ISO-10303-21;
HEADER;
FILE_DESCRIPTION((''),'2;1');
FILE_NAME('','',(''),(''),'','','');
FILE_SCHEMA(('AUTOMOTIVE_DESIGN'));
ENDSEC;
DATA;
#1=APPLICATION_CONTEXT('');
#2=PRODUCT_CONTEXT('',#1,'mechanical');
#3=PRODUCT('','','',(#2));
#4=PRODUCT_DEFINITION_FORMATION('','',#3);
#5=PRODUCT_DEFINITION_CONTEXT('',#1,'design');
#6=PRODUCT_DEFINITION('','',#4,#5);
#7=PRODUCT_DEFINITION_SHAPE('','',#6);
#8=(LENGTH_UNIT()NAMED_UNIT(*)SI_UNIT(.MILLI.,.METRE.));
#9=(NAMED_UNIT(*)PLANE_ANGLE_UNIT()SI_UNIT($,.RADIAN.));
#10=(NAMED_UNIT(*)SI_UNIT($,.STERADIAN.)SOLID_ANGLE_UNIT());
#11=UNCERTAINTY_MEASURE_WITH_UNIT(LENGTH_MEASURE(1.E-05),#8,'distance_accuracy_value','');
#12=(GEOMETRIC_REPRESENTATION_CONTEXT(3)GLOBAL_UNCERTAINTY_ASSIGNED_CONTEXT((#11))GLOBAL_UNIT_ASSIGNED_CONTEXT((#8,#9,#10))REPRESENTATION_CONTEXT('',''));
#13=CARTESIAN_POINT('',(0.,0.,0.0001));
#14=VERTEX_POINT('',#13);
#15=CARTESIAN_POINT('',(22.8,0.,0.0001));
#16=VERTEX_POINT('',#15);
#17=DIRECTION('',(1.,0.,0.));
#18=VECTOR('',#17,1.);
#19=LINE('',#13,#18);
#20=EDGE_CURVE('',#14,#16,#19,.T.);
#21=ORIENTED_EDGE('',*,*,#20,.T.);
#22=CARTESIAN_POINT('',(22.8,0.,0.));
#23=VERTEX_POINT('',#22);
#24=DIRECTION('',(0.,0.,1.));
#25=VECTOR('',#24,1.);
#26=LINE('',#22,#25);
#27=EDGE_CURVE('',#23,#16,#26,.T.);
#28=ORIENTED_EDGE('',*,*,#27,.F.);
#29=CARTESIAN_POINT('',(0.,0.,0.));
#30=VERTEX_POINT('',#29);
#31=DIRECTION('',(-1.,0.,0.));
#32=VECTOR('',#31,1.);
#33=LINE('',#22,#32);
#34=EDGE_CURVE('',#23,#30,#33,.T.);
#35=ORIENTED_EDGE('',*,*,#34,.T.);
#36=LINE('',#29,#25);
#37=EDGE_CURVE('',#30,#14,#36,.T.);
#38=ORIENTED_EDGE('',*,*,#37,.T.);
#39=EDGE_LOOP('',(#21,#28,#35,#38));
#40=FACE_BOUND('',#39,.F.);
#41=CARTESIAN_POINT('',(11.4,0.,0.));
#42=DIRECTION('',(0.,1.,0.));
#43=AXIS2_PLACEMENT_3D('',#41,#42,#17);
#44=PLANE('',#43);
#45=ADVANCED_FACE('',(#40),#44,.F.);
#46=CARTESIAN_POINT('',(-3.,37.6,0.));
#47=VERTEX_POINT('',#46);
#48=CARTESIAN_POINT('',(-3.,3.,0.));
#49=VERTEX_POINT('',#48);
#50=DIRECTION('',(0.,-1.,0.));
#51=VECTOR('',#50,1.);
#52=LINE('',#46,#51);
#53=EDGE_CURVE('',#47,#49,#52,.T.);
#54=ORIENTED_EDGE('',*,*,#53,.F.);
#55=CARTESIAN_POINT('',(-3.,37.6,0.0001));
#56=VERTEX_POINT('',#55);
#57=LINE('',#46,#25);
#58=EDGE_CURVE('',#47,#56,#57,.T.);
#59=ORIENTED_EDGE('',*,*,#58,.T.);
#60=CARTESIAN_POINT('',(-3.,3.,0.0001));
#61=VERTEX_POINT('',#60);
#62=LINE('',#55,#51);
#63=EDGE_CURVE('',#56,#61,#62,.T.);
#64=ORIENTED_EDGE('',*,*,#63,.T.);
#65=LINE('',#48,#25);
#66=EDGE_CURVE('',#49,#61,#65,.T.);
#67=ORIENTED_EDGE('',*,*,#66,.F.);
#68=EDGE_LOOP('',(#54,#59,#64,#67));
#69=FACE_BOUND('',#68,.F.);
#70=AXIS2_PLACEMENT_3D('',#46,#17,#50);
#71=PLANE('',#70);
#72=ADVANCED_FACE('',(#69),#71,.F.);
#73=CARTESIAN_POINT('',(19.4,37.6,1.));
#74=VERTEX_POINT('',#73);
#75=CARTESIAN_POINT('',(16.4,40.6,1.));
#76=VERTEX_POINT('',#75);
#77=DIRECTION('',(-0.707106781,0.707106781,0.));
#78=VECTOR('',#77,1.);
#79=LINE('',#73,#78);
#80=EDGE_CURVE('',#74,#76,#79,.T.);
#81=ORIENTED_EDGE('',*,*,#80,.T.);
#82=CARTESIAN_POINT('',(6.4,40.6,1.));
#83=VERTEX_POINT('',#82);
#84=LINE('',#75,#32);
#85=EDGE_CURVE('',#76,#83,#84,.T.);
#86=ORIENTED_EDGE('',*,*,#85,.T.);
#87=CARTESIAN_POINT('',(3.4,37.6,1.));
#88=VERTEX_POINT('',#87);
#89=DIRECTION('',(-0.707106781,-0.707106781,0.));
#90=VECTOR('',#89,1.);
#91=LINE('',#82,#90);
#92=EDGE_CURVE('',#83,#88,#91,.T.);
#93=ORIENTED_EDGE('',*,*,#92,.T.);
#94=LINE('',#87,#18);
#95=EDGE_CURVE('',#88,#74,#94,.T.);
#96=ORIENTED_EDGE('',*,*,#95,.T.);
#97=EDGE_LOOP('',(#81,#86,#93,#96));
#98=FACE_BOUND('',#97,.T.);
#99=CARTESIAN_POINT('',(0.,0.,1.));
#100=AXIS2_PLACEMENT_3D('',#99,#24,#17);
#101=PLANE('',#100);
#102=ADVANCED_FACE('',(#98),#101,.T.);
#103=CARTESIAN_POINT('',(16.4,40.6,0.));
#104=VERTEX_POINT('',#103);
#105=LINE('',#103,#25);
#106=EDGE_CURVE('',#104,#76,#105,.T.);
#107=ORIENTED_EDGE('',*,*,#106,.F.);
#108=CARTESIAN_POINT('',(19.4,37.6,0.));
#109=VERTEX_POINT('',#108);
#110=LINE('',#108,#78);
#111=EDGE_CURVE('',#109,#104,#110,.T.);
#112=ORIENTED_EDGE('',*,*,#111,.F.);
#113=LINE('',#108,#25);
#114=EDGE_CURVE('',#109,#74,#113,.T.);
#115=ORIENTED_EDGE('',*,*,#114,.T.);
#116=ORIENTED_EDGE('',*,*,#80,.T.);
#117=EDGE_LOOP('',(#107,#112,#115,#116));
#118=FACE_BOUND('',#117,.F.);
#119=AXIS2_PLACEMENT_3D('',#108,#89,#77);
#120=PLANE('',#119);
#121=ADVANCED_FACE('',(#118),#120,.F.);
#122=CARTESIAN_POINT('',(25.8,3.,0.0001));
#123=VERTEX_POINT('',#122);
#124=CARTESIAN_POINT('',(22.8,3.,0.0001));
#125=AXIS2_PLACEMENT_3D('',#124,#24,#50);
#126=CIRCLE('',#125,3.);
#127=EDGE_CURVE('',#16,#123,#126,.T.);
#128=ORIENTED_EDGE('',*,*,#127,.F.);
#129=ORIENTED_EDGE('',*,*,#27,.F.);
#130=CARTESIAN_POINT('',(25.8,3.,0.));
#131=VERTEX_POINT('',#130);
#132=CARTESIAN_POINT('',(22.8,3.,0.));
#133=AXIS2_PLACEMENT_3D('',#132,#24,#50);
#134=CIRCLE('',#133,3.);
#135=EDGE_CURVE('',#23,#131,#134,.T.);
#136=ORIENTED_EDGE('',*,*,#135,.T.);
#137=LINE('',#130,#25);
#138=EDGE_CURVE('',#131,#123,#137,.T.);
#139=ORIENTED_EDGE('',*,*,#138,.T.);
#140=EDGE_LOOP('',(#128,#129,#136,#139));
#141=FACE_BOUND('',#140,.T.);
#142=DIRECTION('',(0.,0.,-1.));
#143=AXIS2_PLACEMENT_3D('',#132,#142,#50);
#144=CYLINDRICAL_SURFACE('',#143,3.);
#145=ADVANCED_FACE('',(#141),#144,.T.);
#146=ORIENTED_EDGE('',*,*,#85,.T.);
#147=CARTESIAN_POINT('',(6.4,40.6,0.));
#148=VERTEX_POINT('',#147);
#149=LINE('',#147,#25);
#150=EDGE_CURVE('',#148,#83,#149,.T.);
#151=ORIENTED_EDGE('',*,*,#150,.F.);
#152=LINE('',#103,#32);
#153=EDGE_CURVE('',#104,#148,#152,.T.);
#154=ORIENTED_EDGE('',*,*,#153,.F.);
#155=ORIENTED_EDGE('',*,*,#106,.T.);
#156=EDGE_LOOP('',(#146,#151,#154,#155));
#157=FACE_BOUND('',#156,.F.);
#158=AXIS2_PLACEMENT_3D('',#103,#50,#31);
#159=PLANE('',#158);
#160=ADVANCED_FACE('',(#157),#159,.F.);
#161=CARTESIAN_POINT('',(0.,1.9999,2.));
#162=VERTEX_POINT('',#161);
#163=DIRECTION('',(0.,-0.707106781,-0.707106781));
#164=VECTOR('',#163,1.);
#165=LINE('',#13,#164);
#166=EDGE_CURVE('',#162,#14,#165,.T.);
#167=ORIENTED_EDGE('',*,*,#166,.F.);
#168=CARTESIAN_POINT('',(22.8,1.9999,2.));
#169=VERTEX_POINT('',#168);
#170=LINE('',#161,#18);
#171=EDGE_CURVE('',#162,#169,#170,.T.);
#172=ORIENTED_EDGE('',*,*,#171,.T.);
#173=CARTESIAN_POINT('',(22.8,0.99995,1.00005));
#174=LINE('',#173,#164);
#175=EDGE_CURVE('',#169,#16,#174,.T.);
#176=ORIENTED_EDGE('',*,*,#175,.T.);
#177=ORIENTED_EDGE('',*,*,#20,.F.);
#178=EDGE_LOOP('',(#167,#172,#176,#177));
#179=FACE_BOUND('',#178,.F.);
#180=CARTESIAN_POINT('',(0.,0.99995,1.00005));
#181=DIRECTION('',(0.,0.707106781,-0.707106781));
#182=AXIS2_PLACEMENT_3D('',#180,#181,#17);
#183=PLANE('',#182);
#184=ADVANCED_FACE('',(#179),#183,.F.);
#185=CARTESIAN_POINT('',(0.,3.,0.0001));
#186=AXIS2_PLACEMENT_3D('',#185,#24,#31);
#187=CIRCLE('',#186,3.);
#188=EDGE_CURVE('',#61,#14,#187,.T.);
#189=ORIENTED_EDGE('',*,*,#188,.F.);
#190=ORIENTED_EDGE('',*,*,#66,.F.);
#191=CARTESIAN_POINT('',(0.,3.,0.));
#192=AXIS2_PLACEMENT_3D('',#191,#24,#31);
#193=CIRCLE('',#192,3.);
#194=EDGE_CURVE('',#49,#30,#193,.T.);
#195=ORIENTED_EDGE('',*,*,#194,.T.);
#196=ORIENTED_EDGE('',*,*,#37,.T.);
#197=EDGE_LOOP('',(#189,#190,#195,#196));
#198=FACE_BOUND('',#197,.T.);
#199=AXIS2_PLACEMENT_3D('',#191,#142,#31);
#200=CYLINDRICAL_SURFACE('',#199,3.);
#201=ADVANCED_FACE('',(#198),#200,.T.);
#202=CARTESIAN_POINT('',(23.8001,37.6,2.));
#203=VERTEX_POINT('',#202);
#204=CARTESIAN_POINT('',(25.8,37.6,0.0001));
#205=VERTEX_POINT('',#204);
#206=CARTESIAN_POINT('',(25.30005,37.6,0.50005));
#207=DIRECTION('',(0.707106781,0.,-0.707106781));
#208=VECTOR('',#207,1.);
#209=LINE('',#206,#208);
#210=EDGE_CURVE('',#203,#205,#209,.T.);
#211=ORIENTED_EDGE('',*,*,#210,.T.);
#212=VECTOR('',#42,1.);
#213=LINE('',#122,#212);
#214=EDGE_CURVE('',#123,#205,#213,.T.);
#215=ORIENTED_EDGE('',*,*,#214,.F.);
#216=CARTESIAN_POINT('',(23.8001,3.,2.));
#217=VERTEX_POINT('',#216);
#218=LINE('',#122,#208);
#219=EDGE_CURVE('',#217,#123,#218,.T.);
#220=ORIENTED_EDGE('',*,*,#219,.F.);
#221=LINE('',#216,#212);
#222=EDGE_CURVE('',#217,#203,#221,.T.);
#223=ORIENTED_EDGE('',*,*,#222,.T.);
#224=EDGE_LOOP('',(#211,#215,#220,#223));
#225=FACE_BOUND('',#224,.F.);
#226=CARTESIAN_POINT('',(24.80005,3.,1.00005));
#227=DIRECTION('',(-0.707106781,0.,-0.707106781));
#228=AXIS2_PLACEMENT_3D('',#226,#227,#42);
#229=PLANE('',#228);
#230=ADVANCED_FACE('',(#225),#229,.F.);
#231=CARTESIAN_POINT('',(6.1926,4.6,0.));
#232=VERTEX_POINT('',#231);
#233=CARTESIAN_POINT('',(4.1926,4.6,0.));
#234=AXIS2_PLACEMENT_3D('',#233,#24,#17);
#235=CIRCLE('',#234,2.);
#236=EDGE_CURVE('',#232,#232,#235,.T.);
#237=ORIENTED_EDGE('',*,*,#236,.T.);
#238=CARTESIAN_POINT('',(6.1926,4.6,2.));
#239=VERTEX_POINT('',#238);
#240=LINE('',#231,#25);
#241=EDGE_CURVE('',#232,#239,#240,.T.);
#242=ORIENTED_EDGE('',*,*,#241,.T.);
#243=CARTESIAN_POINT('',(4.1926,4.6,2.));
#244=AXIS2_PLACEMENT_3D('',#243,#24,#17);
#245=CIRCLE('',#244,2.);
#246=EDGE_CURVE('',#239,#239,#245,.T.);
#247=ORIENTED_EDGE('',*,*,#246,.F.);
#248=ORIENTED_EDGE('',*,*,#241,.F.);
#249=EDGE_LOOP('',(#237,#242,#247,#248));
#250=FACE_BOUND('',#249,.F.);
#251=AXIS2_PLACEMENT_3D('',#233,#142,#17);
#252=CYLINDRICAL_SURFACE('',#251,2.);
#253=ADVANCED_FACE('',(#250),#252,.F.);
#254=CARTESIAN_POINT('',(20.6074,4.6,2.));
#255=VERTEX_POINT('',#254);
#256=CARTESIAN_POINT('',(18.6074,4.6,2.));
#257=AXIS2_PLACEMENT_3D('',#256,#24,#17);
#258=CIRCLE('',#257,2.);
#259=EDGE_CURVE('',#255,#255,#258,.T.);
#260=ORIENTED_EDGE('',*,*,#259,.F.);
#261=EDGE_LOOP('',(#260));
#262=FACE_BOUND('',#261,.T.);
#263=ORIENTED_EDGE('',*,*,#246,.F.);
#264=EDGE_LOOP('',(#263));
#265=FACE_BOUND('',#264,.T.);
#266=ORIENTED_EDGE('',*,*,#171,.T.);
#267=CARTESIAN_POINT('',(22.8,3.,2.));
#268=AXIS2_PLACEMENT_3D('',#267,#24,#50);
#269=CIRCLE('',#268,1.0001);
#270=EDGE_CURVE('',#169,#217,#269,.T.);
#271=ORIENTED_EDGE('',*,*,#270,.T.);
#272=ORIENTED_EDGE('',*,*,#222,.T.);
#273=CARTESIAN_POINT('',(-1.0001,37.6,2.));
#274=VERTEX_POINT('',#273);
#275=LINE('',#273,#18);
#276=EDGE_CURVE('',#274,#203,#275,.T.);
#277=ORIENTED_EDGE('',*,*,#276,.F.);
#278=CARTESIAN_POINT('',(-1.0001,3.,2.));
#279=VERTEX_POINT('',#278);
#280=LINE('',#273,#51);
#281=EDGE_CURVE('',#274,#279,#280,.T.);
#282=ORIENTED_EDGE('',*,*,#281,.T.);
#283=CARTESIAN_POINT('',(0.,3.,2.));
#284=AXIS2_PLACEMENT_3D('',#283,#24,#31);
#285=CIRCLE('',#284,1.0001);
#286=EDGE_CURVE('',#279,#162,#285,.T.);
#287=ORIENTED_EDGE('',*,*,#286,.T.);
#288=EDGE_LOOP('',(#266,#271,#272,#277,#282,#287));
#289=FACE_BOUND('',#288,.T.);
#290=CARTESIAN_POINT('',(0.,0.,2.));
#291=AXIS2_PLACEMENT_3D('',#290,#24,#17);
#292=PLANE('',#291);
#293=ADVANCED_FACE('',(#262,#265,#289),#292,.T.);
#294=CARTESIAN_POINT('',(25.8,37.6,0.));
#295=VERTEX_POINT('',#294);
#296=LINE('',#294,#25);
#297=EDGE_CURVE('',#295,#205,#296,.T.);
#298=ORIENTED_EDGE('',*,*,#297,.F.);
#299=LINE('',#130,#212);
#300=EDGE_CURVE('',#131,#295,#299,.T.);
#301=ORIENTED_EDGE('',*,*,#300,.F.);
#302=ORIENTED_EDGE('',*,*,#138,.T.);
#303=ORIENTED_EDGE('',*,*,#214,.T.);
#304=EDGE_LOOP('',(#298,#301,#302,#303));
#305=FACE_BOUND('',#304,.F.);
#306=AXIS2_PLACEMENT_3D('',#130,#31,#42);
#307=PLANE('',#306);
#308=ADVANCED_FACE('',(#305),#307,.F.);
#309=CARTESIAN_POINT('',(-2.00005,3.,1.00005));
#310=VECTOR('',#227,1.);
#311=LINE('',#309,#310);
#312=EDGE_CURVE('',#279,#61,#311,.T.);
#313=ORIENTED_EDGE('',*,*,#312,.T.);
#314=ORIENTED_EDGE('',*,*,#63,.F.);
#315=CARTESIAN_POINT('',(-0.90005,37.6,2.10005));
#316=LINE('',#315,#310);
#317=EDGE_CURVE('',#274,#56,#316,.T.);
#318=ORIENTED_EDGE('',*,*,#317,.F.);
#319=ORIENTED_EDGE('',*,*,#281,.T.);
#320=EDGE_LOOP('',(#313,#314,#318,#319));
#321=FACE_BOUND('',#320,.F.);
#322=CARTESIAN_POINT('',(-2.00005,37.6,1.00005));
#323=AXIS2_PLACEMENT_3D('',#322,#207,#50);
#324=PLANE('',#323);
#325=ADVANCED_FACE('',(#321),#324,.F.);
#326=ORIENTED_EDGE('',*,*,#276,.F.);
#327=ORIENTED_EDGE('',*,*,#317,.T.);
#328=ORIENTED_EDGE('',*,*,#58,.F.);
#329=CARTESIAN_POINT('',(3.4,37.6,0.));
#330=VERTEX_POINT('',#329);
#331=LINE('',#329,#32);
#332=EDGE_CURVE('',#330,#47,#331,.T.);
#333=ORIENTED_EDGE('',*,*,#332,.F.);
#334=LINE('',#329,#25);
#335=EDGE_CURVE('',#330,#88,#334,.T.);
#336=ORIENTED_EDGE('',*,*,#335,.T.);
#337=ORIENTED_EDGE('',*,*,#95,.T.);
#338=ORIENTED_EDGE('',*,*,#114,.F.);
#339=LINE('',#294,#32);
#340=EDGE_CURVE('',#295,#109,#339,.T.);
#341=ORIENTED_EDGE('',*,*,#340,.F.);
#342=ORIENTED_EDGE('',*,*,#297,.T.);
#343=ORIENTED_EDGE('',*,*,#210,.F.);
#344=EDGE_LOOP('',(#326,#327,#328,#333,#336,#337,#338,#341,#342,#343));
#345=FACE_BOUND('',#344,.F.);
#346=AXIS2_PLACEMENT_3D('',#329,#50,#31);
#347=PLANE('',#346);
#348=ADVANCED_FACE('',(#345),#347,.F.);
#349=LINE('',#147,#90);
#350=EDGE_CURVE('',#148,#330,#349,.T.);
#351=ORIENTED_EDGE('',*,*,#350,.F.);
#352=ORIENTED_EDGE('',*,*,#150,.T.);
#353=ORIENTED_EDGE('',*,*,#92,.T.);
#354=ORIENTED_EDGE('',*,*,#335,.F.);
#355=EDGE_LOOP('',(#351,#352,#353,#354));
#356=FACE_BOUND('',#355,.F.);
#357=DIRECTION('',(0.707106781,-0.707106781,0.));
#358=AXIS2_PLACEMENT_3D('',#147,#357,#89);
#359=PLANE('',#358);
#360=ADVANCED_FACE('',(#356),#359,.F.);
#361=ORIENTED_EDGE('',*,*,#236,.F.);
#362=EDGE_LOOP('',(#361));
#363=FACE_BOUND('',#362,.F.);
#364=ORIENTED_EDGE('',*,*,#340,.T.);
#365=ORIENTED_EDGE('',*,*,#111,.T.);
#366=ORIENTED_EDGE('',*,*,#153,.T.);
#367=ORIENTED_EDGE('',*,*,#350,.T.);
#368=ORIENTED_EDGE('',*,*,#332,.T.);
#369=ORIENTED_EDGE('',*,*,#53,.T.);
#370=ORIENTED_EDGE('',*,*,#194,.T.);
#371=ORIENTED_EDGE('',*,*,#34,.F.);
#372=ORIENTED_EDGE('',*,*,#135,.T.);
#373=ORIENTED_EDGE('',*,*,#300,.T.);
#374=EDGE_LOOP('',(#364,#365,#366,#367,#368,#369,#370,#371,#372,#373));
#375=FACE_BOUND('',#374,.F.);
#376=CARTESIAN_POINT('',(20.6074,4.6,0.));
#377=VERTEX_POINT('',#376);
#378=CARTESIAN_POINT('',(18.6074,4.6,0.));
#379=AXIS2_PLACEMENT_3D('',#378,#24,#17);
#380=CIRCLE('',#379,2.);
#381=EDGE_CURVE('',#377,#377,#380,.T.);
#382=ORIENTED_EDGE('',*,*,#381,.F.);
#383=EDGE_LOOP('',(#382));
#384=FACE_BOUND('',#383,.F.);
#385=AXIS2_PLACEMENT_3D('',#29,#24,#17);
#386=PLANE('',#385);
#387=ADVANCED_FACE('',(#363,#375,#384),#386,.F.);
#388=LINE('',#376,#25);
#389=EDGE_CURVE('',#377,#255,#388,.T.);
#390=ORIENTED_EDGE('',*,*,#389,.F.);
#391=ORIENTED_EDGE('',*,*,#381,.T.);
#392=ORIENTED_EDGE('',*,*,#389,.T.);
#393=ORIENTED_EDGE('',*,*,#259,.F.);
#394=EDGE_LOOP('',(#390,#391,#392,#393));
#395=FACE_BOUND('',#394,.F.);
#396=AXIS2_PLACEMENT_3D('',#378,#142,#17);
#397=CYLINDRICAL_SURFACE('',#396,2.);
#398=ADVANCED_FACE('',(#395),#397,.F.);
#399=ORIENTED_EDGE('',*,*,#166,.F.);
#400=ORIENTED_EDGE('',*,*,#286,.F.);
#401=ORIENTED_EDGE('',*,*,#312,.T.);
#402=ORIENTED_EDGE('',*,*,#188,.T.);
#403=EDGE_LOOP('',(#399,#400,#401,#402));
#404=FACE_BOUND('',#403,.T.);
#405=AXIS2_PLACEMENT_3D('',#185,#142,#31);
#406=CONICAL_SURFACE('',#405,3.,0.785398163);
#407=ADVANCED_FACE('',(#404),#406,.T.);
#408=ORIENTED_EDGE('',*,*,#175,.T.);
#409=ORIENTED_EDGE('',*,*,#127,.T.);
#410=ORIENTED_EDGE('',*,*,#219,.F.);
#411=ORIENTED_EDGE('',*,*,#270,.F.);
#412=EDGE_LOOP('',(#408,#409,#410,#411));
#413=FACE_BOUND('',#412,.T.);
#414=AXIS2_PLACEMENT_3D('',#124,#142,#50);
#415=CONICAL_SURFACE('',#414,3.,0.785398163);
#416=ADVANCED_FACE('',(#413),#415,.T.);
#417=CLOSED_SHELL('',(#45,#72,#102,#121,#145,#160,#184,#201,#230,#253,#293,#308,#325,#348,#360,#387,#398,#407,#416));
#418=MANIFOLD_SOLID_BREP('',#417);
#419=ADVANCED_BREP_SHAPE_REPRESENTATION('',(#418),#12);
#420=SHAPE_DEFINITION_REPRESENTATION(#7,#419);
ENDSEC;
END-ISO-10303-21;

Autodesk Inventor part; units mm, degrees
ref_plane "YZ Plane" through (0, 0, 0) normal (1, 0, 0) x (0, 1, 0)
ref_plane "XZ Plane" through (0, 0, 0) normal (0, 1, 0) x (-1, 0, 0)
ref_plane "XY Plane" through (0, 0, 0) normal (0, 0, 1) x (1, 0, 0)
sketch "Skizze1" plane through (0, 0, 0) normal (0, 0, 1) x (1, 0, 0)
  line L0 (3.4, 37.6) -> (-3, 37.6)
  line L1 (-3, 37.6) -> (-3, 3)
  arc A0 (-3, 3) -> (0, 0) centre (0, 3) ccw
  line L2 (0, 0) -> (22.8, 0)
  arc A1 (22.8, 0) -> (25.8, 3) centre (22.8, 3) ccw
  line L3 (25.8, 3) -> (25.8, 37.6)
  line L4 (25.8, 37.6) -> (19.4, 37.6)
  line L5 (19.4, 37.6) -> (16.4, 40.6)
  line L6 (16.4, 40.6) -> (6.4, 40.6)
  line L7 (6.4, 40.6) -> (3.4, 37.6)
  line L8 (-1.8, 35.6) -> (24.6, 35.6)
  line L9 (24.6, 35.6) -> (24.6, 9.2)
  line L10 (24.6, 9.2) -> (-1.8, 9.2)
  line L11 (-1.8, 9.2) -> (-1.8, 35.6)
  line L12 (24.6, 35.6) -> (-1.8, 35.6)
  line L13 (-1.8, 35.6) -> (-1.8, 9.2)
  line L14 (-1.8, 9.2) -> (24.6, 9.2)
  line L15 (24.6, 9.2) -> (24.6, 35.6)
  line L16 (24.6, 35.6) -> (-1.8, 35.6)
  line L17 (-3, 37.6) -> (3.4, 37.6)
  line L18 (-3, 3) -> (-3, 37.6)
  arc A2 (-3, 3) -> (0, 0) centre (0, 3) ccw
  line L19 (22.8, 0) -> (0, 0)
  arc A3 (22.8, 0) -> (25.8, 3) centre (22.8, 3) ccw
  line L20 (25.8, 37.6) -> (25.8, 3)
  line L21 (19.4, 37.6) -> (25.8, 37.6)
  line L22 (19.4, 37.6) -> (16.4, 40.6)
  line L23 (16.4, 40.6) -> (6.4, 40.6)
  line L24 (6.4, 40.6) -> (3.4, 37.6)
  circle A4 centre (4.1926, 4.6) radius 2
  line L25 (11.4, 35.6) -> (11.4, 0)
  circle A5 centre (18.6074, 4.6) radius 2
  point P0 (-3, 37.6)
  point P1 (-3, 3)
  point P2 (0, 0)
extrude "Extrusion1" add sketch "Skizze1" along normal blind 2 contours L7 L6 L5 L4 L3 A1 L2 A0 L1 L0 | L8 L25 L10 L11 | L8 L9 L10 L25
chamfer "Fase1" distance 2 angle 45 5 edges at (25.8, 20.3, 2) (24.9213, 0.8787, 2) (11.4, 0, 2) (-2.1213, 0.8787, 2) (-3, 20.3, 2)
sketch "Skizze2" plane through (0, 0, 2) normal (0, 0, 1) x (1, 0, 0)
  line L0 (-1, 3) -> (-1, 37.6) projected
  arc A0 (-1, 3) -> (0, 2) centre (0, 3) ccw projected
  line L1 (22.8, 2) -> (0, 2) projected
  arc A1 (22.8, 2) -> (23.8, 3) centre (22.8, 3) ccw projected
  line L2 (23.8, 37.6) -> (23.8, 3) projected
  line L3 (23.8, 37.6) -> (19.4, 37.6) projected
  line L4 (19.4, 37.6) -> (16.4, 40.6) projected
  line L5 (16.4, 40.6) -> (6.4, 40.6) projected
  line L6 (6.4, 40.6) -> (3.4, 37.6) projected
  line L7 (3.4, 37.6) -> (-1, 37.6) projected
  line L8 (6.4, 40.6) -> (3.4, 37.6) projected
  line L9 (3.4, 37.6) -> (19.4, 37.6)
  point P0 (0, 0)
extrude "Extrusion2" cut sketch "Skizze2" against normal blind 1 contours L6 L5 L4 L9
properties part number "OBS-MainCase-A-004_GPS-Cover_v0.1.1"
